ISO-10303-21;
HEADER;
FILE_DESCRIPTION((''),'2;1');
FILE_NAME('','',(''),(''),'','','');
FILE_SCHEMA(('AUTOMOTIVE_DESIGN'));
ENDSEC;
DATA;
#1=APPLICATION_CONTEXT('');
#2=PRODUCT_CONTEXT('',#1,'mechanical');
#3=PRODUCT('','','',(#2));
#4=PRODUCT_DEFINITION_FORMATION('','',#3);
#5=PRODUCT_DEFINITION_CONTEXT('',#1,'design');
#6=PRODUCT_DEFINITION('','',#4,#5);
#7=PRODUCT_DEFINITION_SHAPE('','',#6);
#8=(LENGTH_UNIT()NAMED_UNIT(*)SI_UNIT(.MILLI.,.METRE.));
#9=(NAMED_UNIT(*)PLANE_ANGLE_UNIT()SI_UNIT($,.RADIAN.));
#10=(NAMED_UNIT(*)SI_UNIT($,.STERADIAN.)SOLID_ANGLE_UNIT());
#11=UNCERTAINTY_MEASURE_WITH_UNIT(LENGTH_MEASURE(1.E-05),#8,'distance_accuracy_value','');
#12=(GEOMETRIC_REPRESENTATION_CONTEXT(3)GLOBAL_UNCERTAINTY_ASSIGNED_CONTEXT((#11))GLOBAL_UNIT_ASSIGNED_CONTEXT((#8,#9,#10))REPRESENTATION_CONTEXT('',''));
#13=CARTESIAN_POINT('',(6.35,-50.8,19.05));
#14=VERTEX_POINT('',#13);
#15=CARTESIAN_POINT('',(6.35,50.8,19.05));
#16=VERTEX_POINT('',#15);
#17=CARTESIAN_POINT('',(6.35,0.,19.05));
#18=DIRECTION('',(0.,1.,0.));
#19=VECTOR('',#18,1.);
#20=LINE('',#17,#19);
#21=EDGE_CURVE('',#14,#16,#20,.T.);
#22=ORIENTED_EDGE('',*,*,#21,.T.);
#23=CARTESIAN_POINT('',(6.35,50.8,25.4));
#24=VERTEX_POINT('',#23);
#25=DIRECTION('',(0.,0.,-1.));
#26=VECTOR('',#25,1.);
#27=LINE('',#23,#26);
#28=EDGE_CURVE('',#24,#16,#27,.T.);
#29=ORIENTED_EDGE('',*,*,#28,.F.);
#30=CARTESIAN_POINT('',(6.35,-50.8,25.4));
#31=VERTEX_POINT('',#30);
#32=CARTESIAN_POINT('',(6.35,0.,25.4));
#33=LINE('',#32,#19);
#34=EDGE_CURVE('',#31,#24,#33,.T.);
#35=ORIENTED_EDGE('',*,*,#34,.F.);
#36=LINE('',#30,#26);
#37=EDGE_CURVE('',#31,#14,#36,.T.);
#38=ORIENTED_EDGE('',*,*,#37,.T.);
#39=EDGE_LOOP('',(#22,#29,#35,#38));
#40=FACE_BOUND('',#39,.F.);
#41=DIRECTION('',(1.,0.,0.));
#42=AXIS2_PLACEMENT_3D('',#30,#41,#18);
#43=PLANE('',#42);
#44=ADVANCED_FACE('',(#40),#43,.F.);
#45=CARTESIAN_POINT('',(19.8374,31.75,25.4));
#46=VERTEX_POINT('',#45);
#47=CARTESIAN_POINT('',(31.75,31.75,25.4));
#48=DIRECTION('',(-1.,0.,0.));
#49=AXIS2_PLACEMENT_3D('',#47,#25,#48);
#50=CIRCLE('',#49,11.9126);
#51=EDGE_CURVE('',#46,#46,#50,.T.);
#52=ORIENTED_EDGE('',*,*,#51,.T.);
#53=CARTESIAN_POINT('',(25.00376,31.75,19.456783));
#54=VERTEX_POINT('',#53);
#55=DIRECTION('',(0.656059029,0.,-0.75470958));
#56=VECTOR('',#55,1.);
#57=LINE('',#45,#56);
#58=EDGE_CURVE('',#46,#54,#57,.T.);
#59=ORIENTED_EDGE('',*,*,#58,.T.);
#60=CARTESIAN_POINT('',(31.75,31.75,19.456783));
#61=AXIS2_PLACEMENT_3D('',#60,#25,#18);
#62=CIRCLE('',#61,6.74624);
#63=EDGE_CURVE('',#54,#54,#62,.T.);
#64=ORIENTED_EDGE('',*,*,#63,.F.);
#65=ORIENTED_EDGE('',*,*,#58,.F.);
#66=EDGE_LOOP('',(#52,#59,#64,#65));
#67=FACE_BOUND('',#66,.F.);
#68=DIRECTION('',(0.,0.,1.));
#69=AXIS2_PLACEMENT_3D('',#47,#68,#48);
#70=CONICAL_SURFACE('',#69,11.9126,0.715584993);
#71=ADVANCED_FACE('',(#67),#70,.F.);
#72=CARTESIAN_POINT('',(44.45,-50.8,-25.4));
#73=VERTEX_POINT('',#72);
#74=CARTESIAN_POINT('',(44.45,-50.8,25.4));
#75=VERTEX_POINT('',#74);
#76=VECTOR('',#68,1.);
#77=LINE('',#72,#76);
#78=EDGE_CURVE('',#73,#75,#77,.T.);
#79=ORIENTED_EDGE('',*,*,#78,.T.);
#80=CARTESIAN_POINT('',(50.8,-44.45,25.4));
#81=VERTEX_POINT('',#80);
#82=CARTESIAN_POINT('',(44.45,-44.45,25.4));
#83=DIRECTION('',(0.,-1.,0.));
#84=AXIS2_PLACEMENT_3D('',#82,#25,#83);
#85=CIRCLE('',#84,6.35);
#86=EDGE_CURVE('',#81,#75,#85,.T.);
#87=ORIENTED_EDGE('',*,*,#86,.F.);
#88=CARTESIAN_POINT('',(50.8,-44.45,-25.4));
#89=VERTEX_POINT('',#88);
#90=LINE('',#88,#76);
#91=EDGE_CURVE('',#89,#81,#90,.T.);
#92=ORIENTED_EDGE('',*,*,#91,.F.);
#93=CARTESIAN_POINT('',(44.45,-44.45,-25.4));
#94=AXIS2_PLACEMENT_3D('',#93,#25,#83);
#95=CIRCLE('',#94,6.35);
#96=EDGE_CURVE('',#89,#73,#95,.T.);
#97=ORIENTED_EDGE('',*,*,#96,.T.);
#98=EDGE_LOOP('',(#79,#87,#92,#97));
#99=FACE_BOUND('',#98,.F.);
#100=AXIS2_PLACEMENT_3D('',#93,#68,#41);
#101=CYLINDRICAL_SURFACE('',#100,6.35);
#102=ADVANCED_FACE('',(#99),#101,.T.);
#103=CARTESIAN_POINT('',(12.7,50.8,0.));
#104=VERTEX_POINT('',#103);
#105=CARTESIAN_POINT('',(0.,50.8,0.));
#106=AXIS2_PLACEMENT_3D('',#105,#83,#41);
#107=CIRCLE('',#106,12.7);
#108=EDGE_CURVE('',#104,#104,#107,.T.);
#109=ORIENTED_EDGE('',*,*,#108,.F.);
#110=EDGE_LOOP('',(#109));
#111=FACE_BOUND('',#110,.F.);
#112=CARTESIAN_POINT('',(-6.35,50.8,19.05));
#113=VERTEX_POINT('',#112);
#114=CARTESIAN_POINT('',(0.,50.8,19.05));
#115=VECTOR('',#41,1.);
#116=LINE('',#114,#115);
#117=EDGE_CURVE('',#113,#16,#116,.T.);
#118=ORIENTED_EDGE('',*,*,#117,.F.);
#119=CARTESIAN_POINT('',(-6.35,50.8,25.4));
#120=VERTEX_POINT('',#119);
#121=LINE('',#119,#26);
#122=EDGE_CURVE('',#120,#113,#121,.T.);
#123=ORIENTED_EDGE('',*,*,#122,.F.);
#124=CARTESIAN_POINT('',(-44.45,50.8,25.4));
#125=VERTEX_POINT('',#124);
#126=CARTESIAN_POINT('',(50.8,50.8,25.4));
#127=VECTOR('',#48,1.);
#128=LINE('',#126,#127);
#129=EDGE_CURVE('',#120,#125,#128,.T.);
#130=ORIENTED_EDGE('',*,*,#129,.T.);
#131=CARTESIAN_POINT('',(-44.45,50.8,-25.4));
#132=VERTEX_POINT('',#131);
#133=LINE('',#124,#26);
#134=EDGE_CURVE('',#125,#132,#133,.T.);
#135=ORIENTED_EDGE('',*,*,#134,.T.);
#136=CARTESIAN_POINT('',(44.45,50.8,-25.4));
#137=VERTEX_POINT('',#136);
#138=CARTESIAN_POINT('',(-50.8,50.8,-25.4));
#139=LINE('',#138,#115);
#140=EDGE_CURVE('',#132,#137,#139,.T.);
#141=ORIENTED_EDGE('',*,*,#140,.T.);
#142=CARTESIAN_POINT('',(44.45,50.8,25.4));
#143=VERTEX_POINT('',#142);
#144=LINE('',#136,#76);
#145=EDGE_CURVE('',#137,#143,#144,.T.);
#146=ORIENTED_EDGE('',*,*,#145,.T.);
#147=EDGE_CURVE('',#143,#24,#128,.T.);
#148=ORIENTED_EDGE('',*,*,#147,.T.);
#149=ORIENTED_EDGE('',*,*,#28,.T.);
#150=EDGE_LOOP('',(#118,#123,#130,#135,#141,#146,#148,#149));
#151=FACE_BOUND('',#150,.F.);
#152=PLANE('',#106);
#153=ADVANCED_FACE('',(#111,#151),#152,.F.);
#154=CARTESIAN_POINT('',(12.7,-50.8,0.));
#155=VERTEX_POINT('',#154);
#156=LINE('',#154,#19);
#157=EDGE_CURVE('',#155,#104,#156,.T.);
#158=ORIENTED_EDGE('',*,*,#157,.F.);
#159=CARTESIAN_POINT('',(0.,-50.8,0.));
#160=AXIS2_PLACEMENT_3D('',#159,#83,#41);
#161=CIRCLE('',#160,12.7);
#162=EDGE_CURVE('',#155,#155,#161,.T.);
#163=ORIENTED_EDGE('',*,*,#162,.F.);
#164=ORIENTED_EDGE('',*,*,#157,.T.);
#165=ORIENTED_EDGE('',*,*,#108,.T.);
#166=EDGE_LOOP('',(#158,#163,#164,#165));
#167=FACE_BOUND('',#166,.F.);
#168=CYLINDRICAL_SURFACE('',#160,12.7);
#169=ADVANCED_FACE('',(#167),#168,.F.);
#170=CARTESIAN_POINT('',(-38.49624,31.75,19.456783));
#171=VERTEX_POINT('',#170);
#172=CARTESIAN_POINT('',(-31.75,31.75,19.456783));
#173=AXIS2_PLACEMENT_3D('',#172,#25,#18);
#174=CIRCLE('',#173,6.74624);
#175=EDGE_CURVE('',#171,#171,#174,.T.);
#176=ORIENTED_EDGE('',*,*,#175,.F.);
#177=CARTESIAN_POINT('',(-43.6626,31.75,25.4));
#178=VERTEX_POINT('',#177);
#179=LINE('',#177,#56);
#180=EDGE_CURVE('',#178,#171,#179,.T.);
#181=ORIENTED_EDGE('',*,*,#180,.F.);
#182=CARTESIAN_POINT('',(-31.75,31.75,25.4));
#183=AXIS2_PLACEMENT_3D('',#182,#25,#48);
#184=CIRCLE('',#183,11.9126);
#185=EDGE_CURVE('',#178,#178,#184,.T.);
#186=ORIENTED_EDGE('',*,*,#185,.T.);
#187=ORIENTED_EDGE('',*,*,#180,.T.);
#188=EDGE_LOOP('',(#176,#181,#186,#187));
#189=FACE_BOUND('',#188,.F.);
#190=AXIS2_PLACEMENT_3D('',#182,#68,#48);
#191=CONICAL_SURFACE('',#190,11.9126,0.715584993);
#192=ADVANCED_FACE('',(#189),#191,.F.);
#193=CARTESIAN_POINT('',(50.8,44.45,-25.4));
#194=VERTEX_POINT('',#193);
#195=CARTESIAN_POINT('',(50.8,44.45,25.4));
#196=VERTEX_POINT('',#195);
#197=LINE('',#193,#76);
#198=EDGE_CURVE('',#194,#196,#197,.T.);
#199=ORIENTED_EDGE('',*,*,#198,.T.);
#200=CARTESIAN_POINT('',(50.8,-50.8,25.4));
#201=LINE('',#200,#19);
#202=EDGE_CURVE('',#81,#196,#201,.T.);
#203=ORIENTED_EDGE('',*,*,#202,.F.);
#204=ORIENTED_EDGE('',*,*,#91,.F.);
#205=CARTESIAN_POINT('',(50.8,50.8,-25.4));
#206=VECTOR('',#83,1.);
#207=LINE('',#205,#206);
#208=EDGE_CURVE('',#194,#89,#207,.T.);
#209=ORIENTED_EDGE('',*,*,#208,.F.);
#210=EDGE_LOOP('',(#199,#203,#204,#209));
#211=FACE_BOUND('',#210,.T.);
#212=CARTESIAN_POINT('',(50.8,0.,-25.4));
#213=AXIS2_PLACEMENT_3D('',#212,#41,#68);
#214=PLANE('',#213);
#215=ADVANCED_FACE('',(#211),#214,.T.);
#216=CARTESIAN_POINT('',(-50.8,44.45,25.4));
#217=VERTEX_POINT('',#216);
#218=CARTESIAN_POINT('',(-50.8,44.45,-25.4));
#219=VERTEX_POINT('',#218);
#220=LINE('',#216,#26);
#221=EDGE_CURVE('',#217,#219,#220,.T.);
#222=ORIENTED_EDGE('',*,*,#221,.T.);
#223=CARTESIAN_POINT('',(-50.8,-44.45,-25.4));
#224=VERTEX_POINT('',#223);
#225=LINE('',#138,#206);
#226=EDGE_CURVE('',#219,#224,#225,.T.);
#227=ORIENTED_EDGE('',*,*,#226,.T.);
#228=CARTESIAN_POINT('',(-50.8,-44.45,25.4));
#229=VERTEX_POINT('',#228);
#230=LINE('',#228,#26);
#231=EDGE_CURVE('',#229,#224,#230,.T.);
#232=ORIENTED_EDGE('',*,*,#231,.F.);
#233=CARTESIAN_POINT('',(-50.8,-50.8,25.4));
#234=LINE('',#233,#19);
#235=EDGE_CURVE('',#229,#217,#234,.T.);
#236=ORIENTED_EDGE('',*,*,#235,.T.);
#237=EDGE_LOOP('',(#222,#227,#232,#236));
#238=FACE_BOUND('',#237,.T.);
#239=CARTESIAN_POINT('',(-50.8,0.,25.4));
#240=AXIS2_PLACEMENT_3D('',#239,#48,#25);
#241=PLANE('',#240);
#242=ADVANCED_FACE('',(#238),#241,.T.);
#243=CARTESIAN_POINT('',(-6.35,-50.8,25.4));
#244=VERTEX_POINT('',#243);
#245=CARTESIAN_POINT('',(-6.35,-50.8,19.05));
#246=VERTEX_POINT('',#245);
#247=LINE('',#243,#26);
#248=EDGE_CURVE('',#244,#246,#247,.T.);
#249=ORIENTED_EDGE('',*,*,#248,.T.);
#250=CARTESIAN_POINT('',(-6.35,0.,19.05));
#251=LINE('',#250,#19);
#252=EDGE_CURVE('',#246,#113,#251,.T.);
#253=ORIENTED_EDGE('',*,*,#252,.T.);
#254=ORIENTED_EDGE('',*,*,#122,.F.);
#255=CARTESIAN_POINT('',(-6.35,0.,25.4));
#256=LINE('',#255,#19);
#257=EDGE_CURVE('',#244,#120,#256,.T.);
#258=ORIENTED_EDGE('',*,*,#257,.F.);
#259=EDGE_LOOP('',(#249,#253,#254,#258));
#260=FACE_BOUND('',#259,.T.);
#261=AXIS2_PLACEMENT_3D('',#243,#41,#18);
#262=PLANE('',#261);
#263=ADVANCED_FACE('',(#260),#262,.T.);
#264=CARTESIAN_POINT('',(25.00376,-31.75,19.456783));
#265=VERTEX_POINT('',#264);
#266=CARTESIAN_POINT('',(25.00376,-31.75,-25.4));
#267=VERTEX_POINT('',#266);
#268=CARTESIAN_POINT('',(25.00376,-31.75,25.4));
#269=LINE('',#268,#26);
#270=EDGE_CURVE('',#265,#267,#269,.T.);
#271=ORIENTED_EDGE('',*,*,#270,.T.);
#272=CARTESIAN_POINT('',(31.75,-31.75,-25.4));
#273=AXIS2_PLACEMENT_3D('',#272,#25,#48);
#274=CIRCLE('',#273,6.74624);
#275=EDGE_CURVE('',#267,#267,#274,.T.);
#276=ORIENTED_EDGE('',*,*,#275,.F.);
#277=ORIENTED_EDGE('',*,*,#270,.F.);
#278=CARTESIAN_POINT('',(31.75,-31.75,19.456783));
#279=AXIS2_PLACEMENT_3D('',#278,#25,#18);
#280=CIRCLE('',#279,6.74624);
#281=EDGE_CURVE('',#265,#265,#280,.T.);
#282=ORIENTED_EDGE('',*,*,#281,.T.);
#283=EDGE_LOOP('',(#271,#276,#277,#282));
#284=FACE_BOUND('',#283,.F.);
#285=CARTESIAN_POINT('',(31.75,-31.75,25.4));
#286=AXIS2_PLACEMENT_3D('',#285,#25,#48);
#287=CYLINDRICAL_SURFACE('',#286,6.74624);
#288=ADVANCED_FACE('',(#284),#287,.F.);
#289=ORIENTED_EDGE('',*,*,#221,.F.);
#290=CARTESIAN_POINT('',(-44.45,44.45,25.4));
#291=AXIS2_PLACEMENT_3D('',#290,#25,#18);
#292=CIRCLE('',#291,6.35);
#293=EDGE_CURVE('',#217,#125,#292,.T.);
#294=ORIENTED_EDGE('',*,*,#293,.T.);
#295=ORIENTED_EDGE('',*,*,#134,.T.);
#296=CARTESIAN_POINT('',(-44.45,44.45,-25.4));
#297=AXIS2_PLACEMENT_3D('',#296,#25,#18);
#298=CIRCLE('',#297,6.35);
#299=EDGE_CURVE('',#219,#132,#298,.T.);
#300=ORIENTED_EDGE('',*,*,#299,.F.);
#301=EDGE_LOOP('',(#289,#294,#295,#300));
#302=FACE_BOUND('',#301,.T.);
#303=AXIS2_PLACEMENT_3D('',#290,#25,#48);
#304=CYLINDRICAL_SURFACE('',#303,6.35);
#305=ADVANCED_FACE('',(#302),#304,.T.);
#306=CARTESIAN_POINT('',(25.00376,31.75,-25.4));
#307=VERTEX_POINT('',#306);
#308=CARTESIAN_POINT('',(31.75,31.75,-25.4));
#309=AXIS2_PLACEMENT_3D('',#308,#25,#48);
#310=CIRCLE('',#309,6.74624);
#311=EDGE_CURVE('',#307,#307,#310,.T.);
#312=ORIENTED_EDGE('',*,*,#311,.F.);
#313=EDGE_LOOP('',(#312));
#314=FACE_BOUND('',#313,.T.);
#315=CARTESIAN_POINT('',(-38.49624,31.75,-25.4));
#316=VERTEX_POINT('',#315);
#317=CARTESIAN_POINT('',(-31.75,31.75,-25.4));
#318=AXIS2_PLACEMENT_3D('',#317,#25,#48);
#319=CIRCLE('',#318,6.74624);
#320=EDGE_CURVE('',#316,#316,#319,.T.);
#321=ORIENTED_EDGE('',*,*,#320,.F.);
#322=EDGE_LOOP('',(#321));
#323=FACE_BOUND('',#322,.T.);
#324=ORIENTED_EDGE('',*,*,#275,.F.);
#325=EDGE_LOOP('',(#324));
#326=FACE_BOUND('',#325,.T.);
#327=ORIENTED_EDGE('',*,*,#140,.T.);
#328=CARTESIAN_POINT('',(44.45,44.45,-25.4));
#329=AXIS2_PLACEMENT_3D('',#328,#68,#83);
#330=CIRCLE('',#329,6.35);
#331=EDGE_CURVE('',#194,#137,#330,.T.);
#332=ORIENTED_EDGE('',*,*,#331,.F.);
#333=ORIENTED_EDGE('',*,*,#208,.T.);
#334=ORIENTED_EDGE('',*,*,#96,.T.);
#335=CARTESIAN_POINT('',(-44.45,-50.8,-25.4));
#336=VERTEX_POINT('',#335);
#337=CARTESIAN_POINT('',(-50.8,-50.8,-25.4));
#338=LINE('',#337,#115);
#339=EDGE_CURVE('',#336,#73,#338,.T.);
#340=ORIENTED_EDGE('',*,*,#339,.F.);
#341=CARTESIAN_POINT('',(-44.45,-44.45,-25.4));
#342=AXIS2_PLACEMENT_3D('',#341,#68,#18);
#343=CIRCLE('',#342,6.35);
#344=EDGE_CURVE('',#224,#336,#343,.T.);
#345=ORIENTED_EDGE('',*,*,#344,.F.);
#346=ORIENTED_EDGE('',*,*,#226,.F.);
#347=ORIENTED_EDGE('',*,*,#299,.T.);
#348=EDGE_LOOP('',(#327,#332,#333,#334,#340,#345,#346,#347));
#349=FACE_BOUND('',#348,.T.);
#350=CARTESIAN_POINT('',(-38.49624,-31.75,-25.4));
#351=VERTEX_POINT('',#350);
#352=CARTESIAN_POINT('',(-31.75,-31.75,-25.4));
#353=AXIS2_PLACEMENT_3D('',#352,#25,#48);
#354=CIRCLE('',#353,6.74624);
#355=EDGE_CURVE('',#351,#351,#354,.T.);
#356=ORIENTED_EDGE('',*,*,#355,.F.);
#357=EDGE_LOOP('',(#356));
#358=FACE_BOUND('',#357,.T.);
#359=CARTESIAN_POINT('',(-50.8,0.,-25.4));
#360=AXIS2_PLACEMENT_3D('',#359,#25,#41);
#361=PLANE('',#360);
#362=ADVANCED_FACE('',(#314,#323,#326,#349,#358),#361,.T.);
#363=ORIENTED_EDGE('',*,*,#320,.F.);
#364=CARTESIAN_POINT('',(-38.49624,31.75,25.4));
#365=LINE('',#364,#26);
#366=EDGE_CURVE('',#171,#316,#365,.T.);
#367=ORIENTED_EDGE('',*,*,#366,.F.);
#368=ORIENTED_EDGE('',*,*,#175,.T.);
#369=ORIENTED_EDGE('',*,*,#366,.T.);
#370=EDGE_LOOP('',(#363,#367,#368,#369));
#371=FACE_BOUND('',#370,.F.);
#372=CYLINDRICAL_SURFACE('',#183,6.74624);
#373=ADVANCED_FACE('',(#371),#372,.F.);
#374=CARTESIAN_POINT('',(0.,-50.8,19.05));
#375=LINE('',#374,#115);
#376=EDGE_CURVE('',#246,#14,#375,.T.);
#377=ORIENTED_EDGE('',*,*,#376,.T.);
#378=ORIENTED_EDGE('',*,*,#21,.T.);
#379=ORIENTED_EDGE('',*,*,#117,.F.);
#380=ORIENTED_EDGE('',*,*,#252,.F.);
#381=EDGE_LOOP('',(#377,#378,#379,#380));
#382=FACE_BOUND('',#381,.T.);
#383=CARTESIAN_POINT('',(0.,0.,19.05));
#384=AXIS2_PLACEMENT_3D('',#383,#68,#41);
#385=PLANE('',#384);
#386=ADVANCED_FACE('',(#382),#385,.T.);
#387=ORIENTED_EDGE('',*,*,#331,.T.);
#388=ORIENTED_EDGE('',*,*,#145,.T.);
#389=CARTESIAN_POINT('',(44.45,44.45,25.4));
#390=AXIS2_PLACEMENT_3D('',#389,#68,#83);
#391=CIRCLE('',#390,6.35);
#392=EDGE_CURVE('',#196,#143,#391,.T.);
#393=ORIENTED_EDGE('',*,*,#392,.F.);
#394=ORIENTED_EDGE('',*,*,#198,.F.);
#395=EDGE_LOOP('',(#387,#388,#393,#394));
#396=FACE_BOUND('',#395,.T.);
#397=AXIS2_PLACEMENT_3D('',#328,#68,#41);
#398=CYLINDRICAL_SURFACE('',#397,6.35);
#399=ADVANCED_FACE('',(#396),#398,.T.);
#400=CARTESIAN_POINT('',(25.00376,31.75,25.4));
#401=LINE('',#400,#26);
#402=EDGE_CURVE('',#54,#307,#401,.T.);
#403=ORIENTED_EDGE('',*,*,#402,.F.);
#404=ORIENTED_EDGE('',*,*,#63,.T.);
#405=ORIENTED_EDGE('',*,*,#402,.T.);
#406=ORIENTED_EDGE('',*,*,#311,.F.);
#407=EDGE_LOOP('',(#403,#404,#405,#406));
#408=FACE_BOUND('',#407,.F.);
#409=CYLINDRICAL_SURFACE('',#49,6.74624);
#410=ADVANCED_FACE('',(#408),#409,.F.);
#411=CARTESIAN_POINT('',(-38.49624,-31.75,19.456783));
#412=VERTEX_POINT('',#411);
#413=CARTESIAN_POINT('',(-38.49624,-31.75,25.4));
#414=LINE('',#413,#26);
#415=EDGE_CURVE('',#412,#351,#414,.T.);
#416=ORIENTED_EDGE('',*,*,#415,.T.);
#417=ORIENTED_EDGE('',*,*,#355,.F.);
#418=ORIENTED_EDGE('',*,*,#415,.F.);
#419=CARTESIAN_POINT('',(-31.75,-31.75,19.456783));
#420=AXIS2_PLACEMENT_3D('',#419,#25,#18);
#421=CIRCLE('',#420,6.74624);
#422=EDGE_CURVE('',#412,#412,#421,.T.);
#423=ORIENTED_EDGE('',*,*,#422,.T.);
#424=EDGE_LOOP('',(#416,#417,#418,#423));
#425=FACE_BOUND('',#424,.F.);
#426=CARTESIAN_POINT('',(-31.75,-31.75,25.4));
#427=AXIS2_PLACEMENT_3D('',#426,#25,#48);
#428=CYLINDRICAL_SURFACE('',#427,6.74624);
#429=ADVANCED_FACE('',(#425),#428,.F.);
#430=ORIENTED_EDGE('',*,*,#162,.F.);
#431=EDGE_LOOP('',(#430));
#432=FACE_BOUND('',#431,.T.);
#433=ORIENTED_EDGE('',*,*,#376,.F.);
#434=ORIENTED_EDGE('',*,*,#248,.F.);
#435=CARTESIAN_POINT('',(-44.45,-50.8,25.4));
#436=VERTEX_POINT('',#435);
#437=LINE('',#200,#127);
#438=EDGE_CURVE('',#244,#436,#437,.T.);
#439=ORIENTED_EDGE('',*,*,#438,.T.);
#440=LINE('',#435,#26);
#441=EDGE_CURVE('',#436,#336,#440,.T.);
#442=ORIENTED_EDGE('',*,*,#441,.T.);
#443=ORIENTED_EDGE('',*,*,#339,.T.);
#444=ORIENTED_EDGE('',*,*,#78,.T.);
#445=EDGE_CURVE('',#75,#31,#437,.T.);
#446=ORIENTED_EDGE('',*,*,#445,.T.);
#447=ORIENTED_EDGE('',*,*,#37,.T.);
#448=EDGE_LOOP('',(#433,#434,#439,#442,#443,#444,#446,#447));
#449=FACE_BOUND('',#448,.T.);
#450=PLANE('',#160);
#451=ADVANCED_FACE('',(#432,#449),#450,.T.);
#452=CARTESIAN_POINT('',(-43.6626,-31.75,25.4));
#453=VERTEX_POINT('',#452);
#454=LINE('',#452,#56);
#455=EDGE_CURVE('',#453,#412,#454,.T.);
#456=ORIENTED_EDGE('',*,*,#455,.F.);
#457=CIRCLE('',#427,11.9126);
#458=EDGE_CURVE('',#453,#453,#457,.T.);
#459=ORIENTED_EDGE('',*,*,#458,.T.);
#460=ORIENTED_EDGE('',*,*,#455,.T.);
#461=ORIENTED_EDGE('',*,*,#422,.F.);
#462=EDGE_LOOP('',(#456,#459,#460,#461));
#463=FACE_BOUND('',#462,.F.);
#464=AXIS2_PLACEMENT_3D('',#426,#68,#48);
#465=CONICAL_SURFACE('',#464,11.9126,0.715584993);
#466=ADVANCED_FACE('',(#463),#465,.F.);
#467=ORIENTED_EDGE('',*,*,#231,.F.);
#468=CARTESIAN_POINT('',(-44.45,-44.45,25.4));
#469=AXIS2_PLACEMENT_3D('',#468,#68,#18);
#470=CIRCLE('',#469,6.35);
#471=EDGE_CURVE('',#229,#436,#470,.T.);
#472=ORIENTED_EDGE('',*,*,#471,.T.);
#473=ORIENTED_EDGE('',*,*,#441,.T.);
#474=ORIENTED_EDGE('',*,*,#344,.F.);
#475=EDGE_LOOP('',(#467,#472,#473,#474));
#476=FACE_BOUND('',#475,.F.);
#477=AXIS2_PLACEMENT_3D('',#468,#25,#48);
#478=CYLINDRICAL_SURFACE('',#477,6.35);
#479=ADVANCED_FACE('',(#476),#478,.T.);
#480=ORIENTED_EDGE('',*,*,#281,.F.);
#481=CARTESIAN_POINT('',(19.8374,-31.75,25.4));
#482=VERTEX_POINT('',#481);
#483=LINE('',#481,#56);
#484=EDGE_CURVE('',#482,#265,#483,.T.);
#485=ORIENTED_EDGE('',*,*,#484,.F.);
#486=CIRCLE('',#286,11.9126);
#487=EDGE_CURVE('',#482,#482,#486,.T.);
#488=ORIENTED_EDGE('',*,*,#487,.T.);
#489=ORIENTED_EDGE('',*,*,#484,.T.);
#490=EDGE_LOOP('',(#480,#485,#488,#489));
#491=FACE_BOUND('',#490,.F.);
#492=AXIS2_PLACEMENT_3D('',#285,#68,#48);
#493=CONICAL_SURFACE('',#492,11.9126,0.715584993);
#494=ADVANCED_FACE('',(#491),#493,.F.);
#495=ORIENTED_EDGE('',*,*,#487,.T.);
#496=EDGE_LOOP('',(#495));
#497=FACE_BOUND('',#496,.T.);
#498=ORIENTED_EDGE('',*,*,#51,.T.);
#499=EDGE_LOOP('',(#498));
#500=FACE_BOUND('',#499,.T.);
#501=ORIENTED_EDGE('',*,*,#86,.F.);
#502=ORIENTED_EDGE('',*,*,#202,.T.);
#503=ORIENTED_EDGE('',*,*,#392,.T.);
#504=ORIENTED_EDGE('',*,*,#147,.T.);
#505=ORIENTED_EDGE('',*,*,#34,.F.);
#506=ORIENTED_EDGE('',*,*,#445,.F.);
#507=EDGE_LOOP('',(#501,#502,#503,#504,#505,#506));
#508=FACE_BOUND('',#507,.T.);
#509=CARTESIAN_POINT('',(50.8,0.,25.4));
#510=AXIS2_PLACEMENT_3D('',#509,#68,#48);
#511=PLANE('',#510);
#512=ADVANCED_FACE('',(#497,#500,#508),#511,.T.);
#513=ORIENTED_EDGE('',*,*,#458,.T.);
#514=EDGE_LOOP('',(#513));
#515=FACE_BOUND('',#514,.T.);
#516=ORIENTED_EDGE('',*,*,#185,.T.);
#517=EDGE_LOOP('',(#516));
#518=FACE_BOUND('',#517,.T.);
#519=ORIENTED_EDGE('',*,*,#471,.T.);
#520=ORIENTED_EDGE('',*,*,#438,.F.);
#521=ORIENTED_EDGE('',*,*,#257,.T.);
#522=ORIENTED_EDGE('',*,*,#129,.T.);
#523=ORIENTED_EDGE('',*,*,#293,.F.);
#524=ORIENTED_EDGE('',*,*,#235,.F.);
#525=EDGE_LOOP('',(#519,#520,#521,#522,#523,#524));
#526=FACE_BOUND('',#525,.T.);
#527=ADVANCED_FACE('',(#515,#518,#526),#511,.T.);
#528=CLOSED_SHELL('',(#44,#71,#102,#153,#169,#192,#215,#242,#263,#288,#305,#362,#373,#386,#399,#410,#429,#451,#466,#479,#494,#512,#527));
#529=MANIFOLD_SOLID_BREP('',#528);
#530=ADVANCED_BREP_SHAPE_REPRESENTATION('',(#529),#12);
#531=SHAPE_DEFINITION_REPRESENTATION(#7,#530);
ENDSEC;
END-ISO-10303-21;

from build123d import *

# Parameters (mm, degrees)
F1_DEPTH       = 50.8
F3_D           = 13.49248
F3_CSINK_D     = 23.8252
F3_CSINK_ANGLE = 82
F4_R           = 6.35
F5_W           = 12.7
F5_H           = 101.6
F6_DEPTH       = 6.35
F7_R           = 12.7
F8_DEPTH       = 101.601


# Not quite as in the source:
# - a feature of the source that left no trace in its solid (it failed there, or was rolled back) is left out


with BuildPart() as f1:
    # F0 (on Front) → F1 (new body, symmetric)
    with BuildSketch(Plane.XZ):
        Polygon((12.601675614, 25.4), (-50.8, 25.4), (-50.8, -25.4), (50.8, -25.4), (50.8, 25.4), align=None)
    extrude(amount=F1_DEPTH, both=True)

    # F3 (through all)
    with Locations(Plane.XY.offset(25.4)):
        with Locations((-31.75, 31.75), (31.75, 31.75), (-31.75, -31.75), (31.75, -31.75)):
            CounterSinkHole(F3_D / 2, F3_CSINK_D / 2, counter_sink_angle=F3_CSINK_ANGLE)

    # F4
    f4_edges = [f1.edges().sort_by_distance(p)[0] for p in [
        (-50.8, 50.8, 0),
        (-50.8, -50.8, 0),
        (50.8, -50.8, 0),
        (50.8, 50.8, 0),
    ]]
    fillet(f4_edges, radius=F4_R)

    # F5 (on face) → F6 (cut)
    with BuildSketch(Plane.XY.offset(25.4)):
        Rectangle(F5_W, F5_H)
    extrude(amount=-F6_DEPTH, mode=Mode.SUBTRACT)

    # F7 (on face) → F8 (cut, through all)
    with BuildSketch(Plane.XZ.offset(50.8)):
        Circle(F7_R)
    extrude(amount=-F8_DEPTH, mode=Mode.SUBTRACT)


solid = f1.part
